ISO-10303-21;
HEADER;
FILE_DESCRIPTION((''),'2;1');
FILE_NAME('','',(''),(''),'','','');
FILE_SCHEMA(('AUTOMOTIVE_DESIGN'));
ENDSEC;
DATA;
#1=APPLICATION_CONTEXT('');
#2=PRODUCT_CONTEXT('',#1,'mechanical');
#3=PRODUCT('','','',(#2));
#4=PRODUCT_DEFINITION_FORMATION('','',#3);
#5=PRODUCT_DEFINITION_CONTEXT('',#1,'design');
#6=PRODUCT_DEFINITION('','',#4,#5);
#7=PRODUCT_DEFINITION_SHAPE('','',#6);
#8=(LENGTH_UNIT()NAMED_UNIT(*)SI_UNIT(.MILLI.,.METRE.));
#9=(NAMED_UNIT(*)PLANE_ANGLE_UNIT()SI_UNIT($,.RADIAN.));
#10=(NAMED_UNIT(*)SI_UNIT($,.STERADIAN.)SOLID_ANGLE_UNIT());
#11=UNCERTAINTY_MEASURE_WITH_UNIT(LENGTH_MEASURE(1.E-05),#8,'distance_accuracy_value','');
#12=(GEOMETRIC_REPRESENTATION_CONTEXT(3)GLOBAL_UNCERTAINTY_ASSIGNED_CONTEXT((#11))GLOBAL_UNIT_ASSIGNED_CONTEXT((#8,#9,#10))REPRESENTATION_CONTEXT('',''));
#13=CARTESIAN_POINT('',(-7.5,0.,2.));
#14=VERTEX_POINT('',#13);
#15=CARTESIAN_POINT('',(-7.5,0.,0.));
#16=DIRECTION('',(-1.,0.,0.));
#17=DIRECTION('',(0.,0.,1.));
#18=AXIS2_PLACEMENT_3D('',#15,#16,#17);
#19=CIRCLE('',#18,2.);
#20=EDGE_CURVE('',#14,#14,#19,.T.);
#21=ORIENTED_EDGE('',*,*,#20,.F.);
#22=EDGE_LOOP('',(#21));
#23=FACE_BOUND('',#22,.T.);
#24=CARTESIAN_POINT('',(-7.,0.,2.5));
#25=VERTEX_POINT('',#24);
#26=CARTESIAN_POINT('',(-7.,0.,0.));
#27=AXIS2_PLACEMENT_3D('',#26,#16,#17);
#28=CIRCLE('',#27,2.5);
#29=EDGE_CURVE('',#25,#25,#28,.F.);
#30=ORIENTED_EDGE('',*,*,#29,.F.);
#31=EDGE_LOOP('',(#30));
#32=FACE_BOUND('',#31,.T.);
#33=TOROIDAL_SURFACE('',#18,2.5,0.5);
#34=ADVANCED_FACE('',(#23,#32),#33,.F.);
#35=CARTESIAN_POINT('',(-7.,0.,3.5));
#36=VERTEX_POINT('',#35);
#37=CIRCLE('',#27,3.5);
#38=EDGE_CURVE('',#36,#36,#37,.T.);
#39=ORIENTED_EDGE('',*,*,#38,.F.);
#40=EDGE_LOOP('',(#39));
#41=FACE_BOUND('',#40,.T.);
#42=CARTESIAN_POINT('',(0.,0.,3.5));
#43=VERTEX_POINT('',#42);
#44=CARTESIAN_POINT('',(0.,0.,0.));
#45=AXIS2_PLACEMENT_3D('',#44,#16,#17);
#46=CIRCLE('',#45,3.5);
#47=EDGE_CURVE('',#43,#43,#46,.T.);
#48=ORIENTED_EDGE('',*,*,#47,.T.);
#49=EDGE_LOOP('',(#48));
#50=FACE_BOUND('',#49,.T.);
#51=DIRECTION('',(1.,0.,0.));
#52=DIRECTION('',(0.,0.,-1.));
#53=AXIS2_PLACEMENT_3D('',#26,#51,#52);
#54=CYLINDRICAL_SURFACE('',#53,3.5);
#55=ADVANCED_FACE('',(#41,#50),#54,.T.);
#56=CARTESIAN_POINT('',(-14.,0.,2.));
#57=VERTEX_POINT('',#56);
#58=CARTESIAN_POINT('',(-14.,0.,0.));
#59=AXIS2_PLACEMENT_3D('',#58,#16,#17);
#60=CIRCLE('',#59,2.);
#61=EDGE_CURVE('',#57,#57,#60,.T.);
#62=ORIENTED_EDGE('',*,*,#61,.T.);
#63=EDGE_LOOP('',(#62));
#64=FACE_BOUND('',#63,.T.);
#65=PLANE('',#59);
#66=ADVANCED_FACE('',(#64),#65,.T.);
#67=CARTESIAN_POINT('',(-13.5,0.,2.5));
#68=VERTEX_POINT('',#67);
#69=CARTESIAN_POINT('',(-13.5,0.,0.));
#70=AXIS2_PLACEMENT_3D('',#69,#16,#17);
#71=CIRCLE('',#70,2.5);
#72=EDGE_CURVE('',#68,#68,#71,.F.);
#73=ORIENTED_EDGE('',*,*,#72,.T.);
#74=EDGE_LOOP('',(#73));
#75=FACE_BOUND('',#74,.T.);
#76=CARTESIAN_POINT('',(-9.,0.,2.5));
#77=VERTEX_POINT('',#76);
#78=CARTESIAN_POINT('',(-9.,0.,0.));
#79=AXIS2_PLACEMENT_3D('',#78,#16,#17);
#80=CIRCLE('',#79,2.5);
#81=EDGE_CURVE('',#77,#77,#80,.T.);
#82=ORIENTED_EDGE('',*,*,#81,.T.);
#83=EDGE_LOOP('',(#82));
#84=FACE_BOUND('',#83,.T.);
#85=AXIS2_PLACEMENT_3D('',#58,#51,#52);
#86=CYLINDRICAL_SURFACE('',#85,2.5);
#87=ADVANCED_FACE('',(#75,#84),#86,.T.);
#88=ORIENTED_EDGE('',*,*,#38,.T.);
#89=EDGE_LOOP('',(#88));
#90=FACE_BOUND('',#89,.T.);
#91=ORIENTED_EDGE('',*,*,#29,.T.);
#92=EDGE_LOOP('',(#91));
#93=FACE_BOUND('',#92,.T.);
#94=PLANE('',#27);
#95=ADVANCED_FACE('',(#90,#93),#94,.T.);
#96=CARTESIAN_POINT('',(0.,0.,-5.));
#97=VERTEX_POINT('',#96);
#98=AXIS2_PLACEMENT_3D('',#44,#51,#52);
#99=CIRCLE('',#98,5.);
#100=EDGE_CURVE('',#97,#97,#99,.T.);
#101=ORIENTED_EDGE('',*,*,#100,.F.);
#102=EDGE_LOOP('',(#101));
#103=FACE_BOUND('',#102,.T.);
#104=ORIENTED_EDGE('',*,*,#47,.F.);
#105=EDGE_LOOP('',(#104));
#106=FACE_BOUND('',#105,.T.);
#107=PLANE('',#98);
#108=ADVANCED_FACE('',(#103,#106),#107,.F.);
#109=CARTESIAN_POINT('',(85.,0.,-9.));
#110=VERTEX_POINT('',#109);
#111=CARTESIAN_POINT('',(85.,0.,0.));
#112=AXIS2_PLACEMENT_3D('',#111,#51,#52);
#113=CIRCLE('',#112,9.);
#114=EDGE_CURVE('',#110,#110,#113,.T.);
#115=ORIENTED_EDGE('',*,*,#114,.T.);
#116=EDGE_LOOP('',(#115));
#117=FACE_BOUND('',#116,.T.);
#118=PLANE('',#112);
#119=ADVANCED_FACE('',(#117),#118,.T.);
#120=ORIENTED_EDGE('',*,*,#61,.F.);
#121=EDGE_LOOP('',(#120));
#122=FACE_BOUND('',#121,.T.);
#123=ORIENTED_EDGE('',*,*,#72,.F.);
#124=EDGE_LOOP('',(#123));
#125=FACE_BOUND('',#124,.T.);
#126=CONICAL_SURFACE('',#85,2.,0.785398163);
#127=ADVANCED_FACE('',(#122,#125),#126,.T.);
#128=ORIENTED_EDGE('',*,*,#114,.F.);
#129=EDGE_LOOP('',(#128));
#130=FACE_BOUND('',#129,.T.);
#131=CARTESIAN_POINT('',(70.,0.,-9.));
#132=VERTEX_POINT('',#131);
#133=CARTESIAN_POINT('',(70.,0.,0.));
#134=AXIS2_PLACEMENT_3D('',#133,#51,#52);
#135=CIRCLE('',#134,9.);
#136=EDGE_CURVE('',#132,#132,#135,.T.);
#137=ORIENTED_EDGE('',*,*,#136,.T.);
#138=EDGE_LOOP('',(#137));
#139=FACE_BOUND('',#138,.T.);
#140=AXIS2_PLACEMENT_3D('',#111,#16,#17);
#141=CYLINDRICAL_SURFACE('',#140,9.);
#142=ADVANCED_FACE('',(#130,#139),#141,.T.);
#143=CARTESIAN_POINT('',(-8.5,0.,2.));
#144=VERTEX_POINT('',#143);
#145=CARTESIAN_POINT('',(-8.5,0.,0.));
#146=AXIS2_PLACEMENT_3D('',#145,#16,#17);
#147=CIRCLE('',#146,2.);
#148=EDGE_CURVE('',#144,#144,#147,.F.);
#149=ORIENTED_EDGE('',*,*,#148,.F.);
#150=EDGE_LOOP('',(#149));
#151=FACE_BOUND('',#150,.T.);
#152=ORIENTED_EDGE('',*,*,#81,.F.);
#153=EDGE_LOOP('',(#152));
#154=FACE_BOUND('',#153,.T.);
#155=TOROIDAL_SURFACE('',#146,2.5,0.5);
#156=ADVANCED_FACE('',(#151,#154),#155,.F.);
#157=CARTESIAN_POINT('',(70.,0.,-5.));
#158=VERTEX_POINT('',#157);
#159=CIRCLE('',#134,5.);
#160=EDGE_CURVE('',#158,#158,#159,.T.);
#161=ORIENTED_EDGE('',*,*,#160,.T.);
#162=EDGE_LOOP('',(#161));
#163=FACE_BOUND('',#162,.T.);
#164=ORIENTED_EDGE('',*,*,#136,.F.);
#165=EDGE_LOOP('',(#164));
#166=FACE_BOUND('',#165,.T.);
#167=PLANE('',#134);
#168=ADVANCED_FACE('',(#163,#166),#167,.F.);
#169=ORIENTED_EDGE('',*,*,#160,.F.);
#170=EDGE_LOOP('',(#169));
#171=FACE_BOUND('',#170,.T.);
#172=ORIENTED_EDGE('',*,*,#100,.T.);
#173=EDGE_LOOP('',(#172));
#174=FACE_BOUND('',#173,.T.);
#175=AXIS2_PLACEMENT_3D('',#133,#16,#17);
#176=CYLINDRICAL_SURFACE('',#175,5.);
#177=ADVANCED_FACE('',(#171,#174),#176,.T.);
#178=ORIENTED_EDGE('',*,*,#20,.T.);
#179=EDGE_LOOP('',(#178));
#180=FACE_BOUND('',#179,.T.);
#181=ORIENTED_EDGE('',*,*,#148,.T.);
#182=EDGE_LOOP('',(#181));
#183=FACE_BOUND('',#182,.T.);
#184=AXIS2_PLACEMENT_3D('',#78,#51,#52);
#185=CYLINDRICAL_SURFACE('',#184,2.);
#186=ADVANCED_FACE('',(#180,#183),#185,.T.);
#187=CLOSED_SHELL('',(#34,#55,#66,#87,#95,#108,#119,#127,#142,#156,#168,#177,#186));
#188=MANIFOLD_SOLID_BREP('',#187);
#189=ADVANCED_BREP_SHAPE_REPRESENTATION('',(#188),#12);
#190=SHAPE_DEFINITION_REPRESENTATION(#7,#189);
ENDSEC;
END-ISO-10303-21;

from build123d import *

# Parameters (mm, degrees)
SKETCH1_R           = 5
BOSS_EXTRUDE1_DEPTH = 70
SKETCH3_R           = 3.5
BOSS_EXTRUDE2_DEPTH = 7
SKETCH4_R           = 2.5
BOSS_EXTRUDE3_DEPTH = 7
SKETCH7_OUTSIDE_W   = 29.036
SKETCH7_OUTSIDE_H   = 29.036
SKETCH7_OUTSIDE_R   = 2
CUT_EXTRUDE5_DEPTH  = 2
CHAMFER1_SIZE       = 0.5
FILLET1_R           = 0.5
SKETCH8_R           = 9
BOSS_EXTRUDE4_DEPTH = 15


with BuildPart() as part:
    # Sketch1 → Boss-Extrude1 (new body)
    with BuildSketch(Plane(origin=(0, 0, 0), x_dir=(0, 0, -1), z_dir=(1, 0, 0))):
        Circle(SKETCH1_R)
    extrude(amount=BOSS_EXTRUDE1_DEPTH)

    # Sketch3 → Boss-Extrude2 (add)
    with BuildSketch(Plane.ZY):
        Circle(SKETCH3_R)
    extrude(amount=BOSS_EXTRUDE2_DEPTH)

    # Sketch4 → Boss-Extrude3 (add)
    with BuildSketch(Plane.ZY.offset(7)):
        Circle(SKETCH4_R)
    extrude(amount=BOSS_EXTRUDE3_DEPTH)

    # Sketch7 outside → Cut-Extrude5 (cut)
    with BuildSketch(Plane.ZY.offset(7)):
        Rectangle(SKETCH7_OUTSIDE_W, SKETCH7_OUTSIDE_H)
        Circle(SKETCH7_OUTSIDE_R, mode=Mode.SUBTRACT)
    extrude(amount=CUT_EXTRUDE5_DEPTH, mode=Mode.SUBTRACT)

    # Chamfer1
    chamfer1_edges = [part.edges().sort_by_distance(p)[0] for p in [
        (-14, 0, -2.5),
    ]]
    chamfer(chamfer1_edges, length=CHAMFER1_SIZE)

    # Fillet1
    fillet1_edges = [part.edges().sort_by_distance(p)[0] for p in [
        (-7, 0, -2),
        (-9, 0, -2),
    ]]
    fillet(fillet1_edges, radius=FILLET1_R - 0.0001)  # a hair under: the kernel refuses the full size

    # Sketch8 → Boss-Extrude4 (add)
    with BuildSketch(Plane(origin=(70, 0, 0), x_dir=(0, 0, -1), z_dir=(1, 0, 0))):
        Circle(SKETCH8_R)
    extrude(amount=BOSS_EXTRUDE4_DEPTH)


solid = part.part
